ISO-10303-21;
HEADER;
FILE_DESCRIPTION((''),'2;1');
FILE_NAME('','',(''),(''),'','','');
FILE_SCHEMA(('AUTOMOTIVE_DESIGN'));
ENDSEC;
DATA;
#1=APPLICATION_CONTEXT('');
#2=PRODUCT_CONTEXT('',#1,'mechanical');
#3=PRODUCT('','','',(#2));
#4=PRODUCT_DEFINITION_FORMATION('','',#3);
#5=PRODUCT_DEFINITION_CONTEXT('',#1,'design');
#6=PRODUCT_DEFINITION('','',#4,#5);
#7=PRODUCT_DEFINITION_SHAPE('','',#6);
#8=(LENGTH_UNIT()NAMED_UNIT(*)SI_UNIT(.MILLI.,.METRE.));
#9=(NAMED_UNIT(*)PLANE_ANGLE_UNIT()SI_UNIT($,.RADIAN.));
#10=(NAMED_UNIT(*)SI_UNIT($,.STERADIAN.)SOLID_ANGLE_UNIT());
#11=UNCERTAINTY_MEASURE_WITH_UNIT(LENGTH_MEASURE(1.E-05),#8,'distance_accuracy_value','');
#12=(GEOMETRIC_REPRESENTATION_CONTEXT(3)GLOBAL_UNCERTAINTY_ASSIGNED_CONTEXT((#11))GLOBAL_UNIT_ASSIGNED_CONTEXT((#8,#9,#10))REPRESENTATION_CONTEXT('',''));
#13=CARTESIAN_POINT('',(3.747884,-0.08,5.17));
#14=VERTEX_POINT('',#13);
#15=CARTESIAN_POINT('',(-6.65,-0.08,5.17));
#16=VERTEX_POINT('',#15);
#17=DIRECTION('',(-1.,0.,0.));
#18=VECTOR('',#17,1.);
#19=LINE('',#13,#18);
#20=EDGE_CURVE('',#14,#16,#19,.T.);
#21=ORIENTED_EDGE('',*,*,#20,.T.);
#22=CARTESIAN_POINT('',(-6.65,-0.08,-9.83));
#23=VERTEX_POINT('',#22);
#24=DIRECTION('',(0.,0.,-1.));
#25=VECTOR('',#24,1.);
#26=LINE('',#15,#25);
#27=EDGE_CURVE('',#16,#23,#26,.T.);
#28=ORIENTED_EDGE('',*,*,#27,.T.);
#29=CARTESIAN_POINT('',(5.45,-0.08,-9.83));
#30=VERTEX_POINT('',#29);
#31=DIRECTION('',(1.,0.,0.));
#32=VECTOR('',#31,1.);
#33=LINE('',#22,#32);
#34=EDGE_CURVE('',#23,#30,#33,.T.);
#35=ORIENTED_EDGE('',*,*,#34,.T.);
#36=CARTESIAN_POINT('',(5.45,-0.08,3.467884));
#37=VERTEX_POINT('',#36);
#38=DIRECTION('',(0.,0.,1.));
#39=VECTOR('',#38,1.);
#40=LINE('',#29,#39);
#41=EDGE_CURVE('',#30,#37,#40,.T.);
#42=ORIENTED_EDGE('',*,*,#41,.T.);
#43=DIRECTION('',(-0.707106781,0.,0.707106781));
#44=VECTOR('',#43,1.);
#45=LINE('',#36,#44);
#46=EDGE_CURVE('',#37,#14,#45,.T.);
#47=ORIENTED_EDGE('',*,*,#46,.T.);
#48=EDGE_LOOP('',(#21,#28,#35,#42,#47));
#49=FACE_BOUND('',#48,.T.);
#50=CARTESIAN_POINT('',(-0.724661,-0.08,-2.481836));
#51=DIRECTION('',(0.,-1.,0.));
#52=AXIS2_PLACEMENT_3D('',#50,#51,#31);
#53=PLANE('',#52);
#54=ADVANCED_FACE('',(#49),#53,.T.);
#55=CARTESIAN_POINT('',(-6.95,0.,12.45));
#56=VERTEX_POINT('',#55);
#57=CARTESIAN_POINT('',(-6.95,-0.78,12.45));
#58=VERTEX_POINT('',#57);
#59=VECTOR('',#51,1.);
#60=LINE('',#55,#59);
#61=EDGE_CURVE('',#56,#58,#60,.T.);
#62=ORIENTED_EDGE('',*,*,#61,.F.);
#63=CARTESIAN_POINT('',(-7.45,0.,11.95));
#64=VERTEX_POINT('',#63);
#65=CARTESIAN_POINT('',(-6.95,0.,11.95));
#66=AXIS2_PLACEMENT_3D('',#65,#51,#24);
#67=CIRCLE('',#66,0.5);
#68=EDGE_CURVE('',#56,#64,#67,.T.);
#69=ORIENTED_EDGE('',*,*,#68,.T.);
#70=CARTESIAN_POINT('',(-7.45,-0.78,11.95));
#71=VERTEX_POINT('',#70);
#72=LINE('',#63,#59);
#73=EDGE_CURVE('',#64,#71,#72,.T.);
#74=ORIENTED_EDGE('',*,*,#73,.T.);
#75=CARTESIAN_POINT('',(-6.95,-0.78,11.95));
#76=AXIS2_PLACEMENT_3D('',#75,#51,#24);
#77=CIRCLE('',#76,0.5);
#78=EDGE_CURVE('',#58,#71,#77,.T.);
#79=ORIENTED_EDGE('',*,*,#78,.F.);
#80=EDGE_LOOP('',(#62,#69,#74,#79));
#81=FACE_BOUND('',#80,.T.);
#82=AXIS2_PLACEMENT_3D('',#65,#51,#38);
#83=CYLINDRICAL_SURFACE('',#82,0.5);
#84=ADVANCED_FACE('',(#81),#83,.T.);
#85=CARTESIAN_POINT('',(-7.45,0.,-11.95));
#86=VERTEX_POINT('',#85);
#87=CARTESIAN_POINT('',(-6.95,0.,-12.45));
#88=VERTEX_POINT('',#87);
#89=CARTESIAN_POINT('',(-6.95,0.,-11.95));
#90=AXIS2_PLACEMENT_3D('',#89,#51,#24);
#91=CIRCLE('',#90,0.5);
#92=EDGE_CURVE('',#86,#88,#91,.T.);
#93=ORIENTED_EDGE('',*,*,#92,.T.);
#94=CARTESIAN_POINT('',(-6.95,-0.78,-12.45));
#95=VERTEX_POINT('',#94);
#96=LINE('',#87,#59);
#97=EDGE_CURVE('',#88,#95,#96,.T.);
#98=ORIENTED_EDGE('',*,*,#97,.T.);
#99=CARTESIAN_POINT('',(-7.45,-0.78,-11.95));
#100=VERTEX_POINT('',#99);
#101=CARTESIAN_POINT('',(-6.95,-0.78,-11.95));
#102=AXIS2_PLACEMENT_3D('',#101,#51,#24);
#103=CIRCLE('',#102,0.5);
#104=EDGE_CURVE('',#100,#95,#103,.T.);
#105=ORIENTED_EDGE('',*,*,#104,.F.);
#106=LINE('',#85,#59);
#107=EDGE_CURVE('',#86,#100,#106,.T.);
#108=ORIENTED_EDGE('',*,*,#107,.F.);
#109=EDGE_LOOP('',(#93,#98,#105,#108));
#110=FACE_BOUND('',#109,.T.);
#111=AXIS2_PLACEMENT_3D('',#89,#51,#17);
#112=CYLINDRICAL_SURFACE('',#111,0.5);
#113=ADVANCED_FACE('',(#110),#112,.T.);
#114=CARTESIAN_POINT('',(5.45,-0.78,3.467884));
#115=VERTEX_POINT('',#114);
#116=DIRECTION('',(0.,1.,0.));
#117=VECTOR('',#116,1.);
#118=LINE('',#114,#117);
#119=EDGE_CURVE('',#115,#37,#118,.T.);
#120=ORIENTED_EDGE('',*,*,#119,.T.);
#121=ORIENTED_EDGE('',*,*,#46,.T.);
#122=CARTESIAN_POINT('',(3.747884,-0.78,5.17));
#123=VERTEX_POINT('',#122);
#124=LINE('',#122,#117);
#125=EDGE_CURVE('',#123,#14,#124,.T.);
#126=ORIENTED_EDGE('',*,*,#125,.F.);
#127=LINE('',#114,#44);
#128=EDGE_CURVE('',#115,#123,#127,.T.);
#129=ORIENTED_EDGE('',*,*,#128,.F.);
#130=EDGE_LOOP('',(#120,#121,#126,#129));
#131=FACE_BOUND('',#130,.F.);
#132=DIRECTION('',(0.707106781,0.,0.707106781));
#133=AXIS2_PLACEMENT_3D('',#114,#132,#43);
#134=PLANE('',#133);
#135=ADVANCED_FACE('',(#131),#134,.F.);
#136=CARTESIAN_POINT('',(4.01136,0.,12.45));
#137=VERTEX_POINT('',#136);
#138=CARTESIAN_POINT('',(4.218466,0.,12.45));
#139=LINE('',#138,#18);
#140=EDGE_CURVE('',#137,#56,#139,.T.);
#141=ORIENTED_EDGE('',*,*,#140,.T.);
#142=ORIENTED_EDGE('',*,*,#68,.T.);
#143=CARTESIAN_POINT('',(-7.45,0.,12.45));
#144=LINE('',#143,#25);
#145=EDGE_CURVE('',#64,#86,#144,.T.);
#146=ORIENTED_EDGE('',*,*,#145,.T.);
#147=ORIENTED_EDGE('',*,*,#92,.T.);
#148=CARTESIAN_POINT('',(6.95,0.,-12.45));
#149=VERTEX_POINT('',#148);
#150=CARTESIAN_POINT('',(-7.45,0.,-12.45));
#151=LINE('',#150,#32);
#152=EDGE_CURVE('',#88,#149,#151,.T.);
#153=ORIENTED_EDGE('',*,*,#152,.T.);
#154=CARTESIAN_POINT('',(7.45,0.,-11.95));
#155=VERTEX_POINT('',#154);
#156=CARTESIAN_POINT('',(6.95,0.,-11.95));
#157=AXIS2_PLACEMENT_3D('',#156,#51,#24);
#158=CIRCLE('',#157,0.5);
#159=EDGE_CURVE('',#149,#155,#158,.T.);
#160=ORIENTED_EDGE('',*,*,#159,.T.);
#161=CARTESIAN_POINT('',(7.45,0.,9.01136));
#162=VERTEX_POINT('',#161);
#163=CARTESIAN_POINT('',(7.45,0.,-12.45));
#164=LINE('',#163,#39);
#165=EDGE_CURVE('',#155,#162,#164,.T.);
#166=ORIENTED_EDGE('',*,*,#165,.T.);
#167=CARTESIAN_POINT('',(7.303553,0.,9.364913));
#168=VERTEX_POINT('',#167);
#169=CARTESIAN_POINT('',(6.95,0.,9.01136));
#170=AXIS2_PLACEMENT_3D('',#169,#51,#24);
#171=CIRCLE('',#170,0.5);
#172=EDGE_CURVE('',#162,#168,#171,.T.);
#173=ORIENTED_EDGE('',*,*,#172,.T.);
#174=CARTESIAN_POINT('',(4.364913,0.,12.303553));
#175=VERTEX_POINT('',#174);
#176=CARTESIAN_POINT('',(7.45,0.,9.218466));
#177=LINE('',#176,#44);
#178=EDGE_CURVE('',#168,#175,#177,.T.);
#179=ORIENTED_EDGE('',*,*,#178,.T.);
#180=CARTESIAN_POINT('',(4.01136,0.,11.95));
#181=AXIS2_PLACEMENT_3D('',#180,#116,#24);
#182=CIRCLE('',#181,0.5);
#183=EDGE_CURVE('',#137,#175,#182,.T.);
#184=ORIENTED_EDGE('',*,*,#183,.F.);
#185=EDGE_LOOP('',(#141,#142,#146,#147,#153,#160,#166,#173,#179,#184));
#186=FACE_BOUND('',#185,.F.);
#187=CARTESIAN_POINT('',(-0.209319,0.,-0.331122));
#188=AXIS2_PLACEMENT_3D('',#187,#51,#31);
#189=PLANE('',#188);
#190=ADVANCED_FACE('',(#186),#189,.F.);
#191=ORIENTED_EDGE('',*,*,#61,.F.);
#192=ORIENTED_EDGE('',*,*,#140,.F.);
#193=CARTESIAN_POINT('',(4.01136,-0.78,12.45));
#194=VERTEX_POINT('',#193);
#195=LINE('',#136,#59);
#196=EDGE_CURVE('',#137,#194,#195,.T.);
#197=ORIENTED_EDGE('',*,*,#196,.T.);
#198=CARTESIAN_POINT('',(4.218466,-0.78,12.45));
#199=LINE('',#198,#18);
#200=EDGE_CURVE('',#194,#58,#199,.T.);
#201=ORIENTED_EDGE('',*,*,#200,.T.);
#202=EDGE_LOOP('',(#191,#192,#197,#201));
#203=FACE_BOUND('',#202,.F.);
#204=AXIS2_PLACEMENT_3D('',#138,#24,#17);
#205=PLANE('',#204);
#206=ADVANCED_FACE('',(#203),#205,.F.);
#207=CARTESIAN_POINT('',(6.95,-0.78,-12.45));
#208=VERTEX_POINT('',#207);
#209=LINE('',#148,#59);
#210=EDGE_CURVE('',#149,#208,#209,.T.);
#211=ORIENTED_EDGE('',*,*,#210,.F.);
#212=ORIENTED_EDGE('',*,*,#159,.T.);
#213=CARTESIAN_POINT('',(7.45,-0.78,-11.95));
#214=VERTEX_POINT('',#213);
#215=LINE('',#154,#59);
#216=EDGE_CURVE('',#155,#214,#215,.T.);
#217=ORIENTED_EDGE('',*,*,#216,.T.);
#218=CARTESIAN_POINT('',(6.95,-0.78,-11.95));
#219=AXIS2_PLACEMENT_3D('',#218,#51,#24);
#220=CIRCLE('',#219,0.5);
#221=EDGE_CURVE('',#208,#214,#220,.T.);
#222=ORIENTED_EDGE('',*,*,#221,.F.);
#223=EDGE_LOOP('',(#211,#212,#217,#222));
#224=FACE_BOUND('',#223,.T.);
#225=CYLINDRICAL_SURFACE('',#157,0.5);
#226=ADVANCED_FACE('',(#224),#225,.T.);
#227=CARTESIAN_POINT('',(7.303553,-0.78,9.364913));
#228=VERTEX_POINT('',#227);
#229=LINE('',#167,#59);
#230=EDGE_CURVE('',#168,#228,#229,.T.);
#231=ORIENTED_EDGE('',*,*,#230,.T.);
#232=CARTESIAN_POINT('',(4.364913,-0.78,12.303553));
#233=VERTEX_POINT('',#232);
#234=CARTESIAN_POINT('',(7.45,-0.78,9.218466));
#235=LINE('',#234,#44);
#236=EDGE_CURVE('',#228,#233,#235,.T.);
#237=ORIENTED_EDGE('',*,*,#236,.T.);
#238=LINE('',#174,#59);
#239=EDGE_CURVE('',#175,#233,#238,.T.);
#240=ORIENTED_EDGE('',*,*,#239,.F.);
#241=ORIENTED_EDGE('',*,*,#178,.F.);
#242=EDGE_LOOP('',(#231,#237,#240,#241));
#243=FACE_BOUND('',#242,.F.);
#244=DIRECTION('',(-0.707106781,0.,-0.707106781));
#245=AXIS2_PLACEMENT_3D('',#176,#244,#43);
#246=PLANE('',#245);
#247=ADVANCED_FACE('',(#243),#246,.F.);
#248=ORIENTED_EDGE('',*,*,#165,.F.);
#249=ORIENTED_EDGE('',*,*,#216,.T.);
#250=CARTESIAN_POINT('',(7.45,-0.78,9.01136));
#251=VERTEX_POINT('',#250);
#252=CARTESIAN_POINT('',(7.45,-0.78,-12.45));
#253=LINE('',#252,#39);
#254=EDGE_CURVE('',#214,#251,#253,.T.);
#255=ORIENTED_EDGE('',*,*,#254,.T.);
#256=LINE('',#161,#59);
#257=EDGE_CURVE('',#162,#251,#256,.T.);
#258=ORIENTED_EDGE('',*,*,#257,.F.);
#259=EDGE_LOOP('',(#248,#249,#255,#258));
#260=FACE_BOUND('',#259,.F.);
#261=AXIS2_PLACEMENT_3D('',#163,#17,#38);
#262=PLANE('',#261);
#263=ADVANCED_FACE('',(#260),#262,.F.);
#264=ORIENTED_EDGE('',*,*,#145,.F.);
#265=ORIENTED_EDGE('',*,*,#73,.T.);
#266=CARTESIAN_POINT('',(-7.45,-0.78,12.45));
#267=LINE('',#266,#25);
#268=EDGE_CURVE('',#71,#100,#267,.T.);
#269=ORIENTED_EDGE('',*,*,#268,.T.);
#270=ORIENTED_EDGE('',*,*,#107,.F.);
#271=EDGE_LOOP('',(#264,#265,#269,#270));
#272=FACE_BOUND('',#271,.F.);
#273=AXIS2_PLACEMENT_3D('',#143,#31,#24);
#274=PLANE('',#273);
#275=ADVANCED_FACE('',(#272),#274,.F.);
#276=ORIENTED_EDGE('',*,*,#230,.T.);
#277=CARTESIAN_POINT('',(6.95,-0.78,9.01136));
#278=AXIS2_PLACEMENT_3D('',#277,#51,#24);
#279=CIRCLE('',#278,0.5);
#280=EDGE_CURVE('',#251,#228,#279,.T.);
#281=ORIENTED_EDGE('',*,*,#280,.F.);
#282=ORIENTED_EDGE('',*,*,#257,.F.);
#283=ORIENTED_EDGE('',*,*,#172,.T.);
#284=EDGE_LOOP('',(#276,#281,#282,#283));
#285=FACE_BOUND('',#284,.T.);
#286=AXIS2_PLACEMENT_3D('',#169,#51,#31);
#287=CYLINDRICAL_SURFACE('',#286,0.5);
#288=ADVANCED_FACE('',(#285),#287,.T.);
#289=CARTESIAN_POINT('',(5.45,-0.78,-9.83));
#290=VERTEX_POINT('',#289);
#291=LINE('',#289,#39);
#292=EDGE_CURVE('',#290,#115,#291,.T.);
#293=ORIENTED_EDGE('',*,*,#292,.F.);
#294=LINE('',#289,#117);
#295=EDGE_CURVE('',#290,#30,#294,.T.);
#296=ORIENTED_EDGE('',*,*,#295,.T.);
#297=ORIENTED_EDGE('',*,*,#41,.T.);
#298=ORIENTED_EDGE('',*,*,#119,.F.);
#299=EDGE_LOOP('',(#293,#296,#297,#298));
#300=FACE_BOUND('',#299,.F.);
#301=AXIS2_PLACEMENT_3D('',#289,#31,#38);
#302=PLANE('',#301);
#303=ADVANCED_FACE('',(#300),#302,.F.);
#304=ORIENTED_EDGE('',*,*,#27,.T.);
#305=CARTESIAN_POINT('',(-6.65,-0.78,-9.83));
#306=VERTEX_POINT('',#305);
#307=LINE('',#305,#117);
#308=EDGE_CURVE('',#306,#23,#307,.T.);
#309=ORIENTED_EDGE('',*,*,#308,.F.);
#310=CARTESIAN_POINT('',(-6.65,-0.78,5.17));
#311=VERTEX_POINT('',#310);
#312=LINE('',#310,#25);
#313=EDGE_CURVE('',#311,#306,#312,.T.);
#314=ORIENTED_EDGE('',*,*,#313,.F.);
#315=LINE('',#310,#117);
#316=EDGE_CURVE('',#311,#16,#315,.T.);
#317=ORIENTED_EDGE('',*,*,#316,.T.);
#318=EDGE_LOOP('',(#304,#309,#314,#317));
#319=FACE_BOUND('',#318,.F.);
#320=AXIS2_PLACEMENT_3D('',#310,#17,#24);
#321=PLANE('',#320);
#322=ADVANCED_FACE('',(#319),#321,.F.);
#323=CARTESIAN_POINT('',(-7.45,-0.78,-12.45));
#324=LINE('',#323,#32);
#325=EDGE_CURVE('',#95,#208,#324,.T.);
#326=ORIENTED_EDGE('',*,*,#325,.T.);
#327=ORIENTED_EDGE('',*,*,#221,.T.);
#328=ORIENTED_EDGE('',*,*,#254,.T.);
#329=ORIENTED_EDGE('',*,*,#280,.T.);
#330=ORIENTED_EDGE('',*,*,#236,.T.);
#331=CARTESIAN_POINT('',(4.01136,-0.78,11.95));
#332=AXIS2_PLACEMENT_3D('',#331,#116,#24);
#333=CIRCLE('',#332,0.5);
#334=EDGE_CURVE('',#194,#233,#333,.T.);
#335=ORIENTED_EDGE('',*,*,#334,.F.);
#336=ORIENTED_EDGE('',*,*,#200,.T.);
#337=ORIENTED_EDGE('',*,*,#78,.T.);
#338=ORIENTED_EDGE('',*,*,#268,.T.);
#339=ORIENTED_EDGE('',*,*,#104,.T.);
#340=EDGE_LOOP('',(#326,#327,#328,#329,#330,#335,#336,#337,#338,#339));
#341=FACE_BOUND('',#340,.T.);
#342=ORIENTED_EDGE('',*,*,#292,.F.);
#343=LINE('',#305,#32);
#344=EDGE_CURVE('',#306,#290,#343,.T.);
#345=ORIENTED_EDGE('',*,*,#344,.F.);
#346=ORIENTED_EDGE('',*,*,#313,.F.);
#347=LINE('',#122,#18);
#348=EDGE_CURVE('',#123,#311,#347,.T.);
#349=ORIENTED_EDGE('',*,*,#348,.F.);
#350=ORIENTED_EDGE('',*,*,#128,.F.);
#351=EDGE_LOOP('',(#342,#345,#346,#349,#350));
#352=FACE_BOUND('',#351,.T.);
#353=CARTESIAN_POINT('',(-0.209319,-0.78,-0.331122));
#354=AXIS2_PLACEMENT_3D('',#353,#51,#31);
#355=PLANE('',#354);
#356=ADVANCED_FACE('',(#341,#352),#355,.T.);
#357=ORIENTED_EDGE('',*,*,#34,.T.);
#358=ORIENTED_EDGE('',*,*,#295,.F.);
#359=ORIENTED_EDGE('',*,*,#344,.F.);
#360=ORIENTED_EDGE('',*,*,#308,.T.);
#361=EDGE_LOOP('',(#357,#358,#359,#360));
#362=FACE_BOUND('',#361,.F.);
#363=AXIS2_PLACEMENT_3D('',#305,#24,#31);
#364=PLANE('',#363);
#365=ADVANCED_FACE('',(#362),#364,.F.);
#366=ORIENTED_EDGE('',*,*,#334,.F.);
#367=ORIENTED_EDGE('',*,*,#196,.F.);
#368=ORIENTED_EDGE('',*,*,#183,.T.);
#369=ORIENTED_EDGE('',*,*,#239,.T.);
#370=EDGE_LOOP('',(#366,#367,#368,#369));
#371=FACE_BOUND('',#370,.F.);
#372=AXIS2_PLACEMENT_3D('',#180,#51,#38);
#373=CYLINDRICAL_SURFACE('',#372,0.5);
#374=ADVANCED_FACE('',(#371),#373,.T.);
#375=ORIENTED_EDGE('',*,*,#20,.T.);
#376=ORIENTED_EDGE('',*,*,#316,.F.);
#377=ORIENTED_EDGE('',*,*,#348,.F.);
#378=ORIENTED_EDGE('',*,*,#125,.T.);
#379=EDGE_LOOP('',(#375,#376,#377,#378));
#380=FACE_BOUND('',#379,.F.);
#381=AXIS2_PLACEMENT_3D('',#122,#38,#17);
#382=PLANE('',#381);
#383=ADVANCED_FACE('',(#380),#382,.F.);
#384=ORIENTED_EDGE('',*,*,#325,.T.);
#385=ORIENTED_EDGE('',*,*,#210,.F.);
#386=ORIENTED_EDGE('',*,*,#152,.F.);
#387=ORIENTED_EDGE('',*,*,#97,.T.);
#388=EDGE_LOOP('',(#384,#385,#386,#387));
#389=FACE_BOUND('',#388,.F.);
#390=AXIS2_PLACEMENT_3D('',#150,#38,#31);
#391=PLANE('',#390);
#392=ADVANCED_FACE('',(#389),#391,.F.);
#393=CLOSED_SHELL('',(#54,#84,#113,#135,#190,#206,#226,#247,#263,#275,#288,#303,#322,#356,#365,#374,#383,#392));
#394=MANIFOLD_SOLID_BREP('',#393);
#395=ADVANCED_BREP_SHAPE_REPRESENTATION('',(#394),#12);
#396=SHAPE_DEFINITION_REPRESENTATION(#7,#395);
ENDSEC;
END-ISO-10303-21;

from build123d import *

# Parameters (mm, degrees)
F1_DEPTH = 0.78
F2_R     = 0.5
F4_DEPTH = 0.7


with BuildPart() as f1:
    # F0 (on Front) → F1 (new body)
    with BuildSketch(Plane.XZ):
        Polygon((4.2184664682, 12.45), (-7.45, 12.45), (-7.45, -12.45), (7.45, -12.45), (7.45, 9.2184664682), align=None)
    extrude(amount=F1_DEPTH)

    # F2
    f2_edges = [f1.edges().sort_by_distance(p)[0] for p in [
        (-7.45, -0.39, 12.45),
        (-7.45, -0.39, -12.45),
        (7.45, -0.39, -12.45),
        (7.45, -0.39, 9.218466),
        (4.218466, -0.39, 12.45),
    ]]
    fillet(f2_edges, radius=F2_R)

    # F3 (on face) → F4 (cut)
    with BuildSketch(Plane.XZ.offset(0.78)):
        Polygon((3.7478837054, 5.17), (-6.65, 5.17), (-6.65, -9.83), (5.45, -9.83), (5.45, 3.4678837054), align=None)
    extrude(amount=-F4_DEPTH, mode=Mode.SUBTRACT)


solid = f1.part
